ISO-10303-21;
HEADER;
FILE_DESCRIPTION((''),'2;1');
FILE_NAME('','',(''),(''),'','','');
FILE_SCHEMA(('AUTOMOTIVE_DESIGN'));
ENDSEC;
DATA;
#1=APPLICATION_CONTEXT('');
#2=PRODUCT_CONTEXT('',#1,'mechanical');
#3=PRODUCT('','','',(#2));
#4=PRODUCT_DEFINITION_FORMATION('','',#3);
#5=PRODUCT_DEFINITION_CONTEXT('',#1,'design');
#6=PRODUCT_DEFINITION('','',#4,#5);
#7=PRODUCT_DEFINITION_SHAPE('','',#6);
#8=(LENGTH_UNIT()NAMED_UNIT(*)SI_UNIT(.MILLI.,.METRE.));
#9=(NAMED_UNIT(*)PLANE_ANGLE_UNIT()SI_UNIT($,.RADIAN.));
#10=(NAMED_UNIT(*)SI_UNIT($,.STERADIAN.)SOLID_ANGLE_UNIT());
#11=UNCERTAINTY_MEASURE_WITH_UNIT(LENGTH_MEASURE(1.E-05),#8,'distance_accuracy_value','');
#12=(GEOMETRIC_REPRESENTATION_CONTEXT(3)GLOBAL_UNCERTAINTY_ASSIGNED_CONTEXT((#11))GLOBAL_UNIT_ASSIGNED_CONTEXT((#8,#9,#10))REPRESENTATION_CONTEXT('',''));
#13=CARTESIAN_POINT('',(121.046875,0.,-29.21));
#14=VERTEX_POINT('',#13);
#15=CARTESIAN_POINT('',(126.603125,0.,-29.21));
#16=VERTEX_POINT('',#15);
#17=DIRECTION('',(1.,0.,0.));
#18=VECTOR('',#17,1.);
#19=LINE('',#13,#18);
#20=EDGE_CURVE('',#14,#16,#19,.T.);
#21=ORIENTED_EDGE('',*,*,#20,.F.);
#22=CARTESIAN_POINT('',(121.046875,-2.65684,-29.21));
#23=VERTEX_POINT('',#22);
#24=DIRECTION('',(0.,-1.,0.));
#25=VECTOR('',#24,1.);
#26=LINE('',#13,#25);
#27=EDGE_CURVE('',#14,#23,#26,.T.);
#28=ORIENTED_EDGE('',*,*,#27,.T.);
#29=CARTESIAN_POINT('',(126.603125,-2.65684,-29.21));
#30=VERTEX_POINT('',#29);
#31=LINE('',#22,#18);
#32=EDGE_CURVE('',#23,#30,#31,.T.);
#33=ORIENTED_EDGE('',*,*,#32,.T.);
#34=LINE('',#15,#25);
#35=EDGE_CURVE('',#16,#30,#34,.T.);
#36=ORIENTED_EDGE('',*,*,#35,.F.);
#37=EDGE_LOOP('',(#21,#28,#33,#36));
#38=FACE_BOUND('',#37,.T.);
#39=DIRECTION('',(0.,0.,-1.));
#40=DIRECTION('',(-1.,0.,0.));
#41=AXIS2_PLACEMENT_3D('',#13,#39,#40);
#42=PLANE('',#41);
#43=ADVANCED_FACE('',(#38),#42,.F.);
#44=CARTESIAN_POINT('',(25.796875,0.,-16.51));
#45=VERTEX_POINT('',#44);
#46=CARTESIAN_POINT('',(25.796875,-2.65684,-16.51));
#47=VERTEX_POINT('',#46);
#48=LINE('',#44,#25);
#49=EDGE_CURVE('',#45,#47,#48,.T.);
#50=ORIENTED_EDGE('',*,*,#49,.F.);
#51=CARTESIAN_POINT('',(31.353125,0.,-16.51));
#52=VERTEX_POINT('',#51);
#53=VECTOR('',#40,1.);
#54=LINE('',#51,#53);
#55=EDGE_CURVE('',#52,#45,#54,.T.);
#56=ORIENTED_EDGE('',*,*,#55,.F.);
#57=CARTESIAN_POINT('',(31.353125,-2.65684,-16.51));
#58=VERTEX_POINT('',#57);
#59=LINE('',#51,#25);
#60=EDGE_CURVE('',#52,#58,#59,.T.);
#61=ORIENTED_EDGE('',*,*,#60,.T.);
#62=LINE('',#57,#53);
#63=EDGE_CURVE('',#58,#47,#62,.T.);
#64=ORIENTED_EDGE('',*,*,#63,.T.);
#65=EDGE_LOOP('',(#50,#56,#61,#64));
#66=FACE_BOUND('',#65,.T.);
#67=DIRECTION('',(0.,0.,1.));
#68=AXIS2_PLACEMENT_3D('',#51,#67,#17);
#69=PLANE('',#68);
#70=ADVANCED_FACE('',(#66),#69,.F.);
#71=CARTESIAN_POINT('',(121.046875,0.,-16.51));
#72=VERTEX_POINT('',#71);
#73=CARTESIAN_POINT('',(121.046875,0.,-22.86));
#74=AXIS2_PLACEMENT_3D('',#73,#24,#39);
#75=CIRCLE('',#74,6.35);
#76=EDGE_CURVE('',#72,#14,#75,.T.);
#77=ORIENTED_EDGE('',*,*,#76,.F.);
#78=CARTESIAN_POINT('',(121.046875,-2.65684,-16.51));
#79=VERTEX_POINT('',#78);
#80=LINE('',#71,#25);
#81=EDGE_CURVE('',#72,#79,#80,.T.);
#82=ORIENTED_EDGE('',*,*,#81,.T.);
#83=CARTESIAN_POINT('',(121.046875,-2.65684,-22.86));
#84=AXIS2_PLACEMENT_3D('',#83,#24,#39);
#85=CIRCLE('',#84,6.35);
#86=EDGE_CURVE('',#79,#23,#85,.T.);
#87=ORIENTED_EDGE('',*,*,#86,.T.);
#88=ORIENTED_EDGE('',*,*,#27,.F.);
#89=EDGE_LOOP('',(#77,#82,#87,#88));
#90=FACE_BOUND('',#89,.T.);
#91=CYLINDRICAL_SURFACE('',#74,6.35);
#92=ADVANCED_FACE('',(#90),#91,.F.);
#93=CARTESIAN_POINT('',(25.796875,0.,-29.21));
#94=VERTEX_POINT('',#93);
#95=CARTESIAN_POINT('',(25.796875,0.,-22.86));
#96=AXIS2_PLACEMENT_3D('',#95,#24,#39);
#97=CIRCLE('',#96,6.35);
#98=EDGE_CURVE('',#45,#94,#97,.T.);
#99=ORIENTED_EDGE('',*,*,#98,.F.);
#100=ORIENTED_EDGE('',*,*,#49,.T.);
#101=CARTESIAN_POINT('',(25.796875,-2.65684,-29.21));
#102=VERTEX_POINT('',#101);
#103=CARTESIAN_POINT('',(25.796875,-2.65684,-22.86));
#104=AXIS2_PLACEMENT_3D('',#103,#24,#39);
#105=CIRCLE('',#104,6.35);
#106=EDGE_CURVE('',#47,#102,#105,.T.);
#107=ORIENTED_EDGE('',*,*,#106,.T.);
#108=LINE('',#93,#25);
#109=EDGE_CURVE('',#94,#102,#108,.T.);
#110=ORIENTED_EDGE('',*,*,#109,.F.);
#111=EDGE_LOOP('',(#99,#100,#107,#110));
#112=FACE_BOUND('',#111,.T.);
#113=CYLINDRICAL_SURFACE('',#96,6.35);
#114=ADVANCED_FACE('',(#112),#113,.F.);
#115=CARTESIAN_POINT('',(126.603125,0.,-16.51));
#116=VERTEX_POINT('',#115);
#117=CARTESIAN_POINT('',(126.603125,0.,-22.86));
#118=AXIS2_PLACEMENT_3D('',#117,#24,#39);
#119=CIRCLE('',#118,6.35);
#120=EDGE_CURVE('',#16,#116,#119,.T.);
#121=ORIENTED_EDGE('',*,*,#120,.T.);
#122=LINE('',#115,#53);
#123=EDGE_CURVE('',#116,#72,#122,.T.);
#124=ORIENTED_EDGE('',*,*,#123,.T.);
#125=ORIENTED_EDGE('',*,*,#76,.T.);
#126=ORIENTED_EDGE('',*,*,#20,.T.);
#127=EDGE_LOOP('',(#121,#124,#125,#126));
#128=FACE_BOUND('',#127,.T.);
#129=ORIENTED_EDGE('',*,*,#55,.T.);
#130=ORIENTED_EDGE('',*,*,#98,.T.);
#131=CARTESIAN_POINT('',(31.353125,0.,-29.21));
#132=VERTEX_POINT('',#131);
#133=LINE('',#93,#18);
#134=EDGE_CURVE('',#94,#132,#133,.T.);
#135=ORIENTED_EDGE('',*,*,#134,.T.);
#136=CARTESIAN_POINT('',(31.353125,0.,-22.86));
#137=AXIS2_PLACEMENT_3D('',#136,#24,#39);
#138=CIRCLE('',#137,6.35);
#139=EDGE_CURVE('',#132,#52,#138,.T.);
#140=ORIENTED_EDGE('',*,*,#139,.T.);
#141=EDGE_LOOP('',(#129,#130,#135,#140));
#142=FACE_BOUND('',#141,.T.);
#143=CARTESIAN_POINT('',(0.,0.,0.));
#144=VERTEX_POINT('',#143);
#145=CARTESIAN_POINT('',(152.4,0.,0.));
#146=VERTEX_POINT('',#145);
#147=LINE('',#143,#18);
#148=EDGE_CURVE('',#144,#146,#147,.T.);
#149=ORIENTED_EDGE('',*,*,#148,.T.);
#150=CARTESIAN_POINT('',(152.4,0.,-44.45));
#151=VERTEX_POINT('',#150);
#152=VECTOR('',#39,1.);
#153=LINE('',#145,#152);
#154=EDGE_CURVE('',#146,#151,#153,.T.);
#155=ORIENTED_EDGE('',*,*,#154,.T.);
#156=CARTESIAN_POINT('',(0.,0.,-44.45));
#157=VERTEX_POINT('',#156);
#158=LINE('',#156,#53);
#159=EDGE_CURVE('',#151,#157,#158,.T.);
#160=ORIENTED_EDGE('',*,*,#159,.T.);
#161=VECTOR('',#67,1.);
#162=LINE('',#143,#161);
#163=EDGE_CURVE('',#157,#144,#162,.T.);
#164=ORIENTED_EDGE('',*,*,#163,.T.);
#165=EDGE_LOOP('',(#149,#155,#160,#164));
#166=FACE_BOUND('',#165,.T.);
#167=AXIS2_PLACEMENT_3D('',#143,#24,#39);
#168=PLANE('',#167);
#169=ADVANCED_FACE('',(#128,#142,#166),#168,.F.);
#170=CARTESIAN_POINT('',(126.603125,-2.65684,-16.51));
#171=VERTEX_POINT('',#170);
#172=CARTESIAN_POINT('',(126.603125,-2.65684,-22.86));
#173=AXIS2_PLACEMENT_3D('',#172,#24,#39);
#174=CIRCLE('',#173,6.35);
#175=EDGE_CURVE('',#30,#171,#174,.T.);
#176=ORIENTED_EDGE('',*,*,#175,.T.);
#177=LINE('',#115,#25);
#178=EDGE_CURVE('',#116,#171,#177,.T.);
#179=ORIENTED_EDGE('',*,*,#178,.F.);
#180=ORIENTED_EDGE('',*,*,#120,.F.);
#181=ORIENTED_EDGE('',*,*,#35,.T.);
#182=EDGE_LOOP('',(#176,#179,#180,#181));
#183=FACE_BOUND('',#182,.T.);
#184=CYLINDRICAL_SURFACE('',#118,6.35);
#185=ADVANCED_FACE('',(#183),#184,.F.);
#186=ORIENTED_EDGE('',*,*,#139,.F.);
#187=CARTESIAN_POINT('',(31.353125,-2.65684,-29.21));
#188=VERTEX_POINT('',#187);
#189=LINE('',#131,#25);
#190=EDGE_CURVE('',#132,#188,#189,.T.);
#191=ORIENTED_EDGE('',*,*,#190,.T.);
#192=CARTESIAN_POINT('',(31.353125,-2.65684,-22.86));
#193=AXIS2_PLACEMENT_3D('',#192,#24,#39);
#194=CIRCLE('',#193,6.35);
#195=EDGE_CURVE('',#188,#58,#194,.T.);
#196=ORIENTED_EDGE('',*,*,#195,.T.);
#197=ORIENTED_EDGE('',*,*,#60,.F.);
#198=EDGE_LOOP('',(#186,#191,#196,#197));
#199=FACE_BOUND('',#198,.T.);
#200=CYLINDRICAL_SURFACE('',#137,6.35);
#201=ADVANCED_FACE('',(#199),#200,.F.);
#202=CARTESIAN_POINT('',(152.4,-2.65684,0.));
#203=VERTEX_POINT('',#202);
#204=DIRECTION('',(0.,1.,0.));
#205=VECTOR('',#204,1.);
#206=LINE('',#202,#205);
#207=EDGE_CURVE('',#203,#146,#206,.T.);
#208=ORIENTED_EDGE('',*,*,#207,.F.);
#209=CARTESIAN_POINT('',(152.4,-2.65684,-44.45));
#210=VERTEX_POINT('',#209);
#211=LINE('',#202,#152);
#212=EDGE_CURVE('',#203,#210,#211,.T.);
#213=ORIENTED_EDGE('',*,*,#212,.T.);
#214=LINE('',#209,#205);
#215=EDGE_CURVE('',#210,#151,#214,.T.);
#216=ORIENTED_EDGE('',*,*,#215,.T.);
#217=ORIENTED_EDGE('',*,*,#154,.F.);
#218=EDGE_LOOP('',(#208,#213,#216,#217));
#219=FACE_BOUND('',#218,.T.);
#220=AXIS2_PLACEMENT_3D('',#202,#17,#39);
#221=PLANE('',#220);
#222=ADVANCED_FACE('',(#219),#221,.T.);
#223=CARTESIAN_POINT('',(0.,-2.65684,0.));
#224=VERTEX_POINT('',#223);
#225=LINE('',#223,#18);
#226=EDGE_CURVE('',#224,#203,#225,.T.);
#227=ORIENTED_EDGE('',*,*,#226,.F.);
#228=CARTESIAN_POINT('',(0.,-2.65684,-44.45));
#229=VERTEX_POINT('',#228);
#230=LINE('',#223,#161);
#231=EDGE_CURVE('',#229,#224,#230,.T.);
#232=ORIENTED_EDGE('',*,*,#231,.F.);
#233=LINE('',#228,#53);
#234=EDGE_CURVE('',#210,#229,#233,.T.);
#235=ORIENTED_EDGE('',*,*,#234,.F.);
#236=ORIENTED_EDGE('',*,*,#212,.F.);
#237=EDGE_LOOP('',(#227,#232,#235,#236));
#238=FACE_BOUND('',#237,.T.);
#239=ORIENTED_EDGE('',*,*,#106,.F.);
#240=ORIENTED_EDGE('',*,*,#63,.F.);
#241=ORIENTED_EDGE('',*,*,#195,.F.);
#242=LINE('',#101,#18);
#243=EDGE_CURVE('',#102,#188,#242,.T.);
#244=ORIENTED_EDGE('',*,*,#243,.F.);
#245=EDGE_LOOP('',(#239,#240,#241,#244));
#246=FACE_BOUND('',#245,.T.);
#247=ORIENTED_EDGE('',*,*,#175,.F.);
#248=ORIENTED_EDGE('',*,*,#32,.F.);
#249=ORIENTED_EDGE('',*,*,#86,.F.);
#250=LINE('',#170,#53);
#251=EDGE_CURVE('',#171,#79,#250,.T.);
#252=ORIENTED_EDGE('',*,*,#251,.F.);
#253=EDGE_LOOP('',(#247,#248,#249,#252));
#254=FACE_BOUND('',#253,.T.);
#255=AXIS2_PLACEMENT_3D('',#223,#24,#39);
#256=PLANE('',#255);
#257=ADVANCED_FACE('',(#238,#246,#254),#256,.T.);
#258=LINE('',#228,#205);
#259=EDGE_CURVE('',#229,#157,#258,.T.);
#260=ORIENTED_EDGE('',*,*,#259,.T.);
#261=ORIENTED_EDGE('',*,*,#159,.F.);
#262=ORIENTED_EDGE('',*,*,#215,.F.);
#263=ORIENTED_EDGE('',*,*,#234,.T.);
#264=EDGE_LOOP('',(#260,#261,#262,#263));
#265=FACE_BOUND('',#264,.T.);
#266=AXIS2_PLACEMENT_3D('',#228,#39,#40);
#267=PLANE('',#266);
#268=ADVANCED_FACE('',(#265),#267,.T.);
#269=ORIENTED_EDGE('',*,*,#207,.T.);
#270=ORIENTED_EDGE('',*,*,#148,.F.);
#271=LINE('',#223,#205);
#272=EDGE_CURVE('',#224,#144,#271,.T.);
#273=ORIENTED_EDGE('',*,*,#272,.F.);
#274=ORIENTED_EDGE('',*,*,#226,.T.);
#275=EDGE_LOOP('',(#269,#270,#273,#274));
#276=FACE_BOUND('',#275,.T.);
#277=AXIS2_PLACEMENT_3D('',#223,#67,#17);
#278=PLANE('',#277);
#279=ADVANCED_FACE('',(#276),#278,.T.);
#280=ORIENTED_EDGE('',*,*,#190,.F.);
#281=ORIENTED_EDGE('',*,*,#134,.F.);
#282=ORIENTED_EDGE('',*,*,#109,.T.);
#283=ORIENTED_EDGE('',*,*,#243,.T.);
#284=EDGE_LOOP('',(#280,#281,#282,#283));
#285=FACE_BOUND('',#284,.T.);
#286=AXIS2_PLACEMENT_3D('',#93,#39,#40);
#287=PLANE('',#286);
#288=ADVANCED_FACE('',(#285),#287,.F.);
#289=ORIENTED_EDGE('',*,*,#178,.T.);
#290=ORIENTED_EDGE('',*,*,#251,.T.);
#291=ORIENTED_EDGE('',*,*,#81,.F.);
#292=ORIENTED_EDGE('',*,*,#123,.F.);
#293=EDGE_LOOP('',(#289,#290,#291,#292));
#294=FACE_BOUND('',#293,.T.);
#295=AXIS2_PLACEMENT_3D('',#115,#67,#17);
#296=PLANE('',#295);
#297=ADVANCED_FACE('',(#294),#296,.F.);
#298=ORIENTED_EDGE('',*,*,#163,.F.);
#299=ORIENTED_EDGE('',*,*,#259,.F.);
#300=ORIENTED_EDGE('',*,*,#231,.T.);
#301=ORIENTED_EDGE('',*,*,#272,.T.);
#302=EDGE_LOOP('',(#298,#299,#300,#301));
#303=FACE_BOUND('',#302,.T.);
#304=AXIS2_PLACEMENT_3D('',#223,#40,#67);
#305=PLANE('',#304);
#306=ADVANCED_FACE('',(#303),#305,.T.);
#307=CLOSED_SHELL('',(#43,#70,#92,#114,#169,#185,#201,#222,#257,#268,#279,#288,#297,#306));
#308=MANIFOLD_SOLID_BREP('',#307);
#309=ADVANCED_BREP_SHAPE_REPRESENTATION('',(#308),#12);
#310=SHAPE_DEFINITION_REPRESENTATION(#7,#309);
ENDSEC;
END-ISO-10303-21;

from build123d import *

# Parameters (mm, degrees)
SKETCH1_W          = 152.4
SKETCH1_H          = 44.45
BASE_FLANGE1_DEPTH = 2.65684
CUT_EXTRUDE3_DEPTH = 159.772230881


# Sheet-metal steps are written as plain solids
with BuildPart() as part:
    # Sketch1 → Base-Flange1 (new body)
    with BuildSketch(Plane(origin=(0, 0, 0), x_dir=(1, 0, 0), z_dir=(0, 1, 0))):
        with Locations((76.2, 22.225)):
            Rectangle(SKETCH1_W, SKETCH1_H)
    extrude(amount=-BASE_FLANGE1_DEPTH)

    # Sketch10 → Cut-Extrude3 (cut, through all)
    with BuildSketch(Plane.XZ.offset(2.65684)):
        with BuildLine():
            Line((25.796875, -29.21), (31.353125, -29.21))
            ThreePointArc((31.353125, -29.21), (37.703125, -22.86), (31.353125, -16.51))
            Line((31.353125, -16.51), (25.796875, -16.51))
            ThreePointArc((25.796875, -16.51), (19.446875, -22.86), (25.796875, -29.21))
        make_face()
        with BuildLine():
            Line((121.046875, -29.21), (126.603125, -29.21))
            ThreePointArc((126.603125, -29.21), (132.953125, -22.86), (126.603125, -16.51))
            Line((126.603125, -16.51), (121.046875, -16.51))
            ThreePointArc((121.046875, -16.51), (114.696875, -22.86), (121.046875, -29.21))
        make_face()
    extrude(amount=-CUT_EXTRUDE3_DEPTH, mode=Mode.SUBTRACT)


solid = part.part
